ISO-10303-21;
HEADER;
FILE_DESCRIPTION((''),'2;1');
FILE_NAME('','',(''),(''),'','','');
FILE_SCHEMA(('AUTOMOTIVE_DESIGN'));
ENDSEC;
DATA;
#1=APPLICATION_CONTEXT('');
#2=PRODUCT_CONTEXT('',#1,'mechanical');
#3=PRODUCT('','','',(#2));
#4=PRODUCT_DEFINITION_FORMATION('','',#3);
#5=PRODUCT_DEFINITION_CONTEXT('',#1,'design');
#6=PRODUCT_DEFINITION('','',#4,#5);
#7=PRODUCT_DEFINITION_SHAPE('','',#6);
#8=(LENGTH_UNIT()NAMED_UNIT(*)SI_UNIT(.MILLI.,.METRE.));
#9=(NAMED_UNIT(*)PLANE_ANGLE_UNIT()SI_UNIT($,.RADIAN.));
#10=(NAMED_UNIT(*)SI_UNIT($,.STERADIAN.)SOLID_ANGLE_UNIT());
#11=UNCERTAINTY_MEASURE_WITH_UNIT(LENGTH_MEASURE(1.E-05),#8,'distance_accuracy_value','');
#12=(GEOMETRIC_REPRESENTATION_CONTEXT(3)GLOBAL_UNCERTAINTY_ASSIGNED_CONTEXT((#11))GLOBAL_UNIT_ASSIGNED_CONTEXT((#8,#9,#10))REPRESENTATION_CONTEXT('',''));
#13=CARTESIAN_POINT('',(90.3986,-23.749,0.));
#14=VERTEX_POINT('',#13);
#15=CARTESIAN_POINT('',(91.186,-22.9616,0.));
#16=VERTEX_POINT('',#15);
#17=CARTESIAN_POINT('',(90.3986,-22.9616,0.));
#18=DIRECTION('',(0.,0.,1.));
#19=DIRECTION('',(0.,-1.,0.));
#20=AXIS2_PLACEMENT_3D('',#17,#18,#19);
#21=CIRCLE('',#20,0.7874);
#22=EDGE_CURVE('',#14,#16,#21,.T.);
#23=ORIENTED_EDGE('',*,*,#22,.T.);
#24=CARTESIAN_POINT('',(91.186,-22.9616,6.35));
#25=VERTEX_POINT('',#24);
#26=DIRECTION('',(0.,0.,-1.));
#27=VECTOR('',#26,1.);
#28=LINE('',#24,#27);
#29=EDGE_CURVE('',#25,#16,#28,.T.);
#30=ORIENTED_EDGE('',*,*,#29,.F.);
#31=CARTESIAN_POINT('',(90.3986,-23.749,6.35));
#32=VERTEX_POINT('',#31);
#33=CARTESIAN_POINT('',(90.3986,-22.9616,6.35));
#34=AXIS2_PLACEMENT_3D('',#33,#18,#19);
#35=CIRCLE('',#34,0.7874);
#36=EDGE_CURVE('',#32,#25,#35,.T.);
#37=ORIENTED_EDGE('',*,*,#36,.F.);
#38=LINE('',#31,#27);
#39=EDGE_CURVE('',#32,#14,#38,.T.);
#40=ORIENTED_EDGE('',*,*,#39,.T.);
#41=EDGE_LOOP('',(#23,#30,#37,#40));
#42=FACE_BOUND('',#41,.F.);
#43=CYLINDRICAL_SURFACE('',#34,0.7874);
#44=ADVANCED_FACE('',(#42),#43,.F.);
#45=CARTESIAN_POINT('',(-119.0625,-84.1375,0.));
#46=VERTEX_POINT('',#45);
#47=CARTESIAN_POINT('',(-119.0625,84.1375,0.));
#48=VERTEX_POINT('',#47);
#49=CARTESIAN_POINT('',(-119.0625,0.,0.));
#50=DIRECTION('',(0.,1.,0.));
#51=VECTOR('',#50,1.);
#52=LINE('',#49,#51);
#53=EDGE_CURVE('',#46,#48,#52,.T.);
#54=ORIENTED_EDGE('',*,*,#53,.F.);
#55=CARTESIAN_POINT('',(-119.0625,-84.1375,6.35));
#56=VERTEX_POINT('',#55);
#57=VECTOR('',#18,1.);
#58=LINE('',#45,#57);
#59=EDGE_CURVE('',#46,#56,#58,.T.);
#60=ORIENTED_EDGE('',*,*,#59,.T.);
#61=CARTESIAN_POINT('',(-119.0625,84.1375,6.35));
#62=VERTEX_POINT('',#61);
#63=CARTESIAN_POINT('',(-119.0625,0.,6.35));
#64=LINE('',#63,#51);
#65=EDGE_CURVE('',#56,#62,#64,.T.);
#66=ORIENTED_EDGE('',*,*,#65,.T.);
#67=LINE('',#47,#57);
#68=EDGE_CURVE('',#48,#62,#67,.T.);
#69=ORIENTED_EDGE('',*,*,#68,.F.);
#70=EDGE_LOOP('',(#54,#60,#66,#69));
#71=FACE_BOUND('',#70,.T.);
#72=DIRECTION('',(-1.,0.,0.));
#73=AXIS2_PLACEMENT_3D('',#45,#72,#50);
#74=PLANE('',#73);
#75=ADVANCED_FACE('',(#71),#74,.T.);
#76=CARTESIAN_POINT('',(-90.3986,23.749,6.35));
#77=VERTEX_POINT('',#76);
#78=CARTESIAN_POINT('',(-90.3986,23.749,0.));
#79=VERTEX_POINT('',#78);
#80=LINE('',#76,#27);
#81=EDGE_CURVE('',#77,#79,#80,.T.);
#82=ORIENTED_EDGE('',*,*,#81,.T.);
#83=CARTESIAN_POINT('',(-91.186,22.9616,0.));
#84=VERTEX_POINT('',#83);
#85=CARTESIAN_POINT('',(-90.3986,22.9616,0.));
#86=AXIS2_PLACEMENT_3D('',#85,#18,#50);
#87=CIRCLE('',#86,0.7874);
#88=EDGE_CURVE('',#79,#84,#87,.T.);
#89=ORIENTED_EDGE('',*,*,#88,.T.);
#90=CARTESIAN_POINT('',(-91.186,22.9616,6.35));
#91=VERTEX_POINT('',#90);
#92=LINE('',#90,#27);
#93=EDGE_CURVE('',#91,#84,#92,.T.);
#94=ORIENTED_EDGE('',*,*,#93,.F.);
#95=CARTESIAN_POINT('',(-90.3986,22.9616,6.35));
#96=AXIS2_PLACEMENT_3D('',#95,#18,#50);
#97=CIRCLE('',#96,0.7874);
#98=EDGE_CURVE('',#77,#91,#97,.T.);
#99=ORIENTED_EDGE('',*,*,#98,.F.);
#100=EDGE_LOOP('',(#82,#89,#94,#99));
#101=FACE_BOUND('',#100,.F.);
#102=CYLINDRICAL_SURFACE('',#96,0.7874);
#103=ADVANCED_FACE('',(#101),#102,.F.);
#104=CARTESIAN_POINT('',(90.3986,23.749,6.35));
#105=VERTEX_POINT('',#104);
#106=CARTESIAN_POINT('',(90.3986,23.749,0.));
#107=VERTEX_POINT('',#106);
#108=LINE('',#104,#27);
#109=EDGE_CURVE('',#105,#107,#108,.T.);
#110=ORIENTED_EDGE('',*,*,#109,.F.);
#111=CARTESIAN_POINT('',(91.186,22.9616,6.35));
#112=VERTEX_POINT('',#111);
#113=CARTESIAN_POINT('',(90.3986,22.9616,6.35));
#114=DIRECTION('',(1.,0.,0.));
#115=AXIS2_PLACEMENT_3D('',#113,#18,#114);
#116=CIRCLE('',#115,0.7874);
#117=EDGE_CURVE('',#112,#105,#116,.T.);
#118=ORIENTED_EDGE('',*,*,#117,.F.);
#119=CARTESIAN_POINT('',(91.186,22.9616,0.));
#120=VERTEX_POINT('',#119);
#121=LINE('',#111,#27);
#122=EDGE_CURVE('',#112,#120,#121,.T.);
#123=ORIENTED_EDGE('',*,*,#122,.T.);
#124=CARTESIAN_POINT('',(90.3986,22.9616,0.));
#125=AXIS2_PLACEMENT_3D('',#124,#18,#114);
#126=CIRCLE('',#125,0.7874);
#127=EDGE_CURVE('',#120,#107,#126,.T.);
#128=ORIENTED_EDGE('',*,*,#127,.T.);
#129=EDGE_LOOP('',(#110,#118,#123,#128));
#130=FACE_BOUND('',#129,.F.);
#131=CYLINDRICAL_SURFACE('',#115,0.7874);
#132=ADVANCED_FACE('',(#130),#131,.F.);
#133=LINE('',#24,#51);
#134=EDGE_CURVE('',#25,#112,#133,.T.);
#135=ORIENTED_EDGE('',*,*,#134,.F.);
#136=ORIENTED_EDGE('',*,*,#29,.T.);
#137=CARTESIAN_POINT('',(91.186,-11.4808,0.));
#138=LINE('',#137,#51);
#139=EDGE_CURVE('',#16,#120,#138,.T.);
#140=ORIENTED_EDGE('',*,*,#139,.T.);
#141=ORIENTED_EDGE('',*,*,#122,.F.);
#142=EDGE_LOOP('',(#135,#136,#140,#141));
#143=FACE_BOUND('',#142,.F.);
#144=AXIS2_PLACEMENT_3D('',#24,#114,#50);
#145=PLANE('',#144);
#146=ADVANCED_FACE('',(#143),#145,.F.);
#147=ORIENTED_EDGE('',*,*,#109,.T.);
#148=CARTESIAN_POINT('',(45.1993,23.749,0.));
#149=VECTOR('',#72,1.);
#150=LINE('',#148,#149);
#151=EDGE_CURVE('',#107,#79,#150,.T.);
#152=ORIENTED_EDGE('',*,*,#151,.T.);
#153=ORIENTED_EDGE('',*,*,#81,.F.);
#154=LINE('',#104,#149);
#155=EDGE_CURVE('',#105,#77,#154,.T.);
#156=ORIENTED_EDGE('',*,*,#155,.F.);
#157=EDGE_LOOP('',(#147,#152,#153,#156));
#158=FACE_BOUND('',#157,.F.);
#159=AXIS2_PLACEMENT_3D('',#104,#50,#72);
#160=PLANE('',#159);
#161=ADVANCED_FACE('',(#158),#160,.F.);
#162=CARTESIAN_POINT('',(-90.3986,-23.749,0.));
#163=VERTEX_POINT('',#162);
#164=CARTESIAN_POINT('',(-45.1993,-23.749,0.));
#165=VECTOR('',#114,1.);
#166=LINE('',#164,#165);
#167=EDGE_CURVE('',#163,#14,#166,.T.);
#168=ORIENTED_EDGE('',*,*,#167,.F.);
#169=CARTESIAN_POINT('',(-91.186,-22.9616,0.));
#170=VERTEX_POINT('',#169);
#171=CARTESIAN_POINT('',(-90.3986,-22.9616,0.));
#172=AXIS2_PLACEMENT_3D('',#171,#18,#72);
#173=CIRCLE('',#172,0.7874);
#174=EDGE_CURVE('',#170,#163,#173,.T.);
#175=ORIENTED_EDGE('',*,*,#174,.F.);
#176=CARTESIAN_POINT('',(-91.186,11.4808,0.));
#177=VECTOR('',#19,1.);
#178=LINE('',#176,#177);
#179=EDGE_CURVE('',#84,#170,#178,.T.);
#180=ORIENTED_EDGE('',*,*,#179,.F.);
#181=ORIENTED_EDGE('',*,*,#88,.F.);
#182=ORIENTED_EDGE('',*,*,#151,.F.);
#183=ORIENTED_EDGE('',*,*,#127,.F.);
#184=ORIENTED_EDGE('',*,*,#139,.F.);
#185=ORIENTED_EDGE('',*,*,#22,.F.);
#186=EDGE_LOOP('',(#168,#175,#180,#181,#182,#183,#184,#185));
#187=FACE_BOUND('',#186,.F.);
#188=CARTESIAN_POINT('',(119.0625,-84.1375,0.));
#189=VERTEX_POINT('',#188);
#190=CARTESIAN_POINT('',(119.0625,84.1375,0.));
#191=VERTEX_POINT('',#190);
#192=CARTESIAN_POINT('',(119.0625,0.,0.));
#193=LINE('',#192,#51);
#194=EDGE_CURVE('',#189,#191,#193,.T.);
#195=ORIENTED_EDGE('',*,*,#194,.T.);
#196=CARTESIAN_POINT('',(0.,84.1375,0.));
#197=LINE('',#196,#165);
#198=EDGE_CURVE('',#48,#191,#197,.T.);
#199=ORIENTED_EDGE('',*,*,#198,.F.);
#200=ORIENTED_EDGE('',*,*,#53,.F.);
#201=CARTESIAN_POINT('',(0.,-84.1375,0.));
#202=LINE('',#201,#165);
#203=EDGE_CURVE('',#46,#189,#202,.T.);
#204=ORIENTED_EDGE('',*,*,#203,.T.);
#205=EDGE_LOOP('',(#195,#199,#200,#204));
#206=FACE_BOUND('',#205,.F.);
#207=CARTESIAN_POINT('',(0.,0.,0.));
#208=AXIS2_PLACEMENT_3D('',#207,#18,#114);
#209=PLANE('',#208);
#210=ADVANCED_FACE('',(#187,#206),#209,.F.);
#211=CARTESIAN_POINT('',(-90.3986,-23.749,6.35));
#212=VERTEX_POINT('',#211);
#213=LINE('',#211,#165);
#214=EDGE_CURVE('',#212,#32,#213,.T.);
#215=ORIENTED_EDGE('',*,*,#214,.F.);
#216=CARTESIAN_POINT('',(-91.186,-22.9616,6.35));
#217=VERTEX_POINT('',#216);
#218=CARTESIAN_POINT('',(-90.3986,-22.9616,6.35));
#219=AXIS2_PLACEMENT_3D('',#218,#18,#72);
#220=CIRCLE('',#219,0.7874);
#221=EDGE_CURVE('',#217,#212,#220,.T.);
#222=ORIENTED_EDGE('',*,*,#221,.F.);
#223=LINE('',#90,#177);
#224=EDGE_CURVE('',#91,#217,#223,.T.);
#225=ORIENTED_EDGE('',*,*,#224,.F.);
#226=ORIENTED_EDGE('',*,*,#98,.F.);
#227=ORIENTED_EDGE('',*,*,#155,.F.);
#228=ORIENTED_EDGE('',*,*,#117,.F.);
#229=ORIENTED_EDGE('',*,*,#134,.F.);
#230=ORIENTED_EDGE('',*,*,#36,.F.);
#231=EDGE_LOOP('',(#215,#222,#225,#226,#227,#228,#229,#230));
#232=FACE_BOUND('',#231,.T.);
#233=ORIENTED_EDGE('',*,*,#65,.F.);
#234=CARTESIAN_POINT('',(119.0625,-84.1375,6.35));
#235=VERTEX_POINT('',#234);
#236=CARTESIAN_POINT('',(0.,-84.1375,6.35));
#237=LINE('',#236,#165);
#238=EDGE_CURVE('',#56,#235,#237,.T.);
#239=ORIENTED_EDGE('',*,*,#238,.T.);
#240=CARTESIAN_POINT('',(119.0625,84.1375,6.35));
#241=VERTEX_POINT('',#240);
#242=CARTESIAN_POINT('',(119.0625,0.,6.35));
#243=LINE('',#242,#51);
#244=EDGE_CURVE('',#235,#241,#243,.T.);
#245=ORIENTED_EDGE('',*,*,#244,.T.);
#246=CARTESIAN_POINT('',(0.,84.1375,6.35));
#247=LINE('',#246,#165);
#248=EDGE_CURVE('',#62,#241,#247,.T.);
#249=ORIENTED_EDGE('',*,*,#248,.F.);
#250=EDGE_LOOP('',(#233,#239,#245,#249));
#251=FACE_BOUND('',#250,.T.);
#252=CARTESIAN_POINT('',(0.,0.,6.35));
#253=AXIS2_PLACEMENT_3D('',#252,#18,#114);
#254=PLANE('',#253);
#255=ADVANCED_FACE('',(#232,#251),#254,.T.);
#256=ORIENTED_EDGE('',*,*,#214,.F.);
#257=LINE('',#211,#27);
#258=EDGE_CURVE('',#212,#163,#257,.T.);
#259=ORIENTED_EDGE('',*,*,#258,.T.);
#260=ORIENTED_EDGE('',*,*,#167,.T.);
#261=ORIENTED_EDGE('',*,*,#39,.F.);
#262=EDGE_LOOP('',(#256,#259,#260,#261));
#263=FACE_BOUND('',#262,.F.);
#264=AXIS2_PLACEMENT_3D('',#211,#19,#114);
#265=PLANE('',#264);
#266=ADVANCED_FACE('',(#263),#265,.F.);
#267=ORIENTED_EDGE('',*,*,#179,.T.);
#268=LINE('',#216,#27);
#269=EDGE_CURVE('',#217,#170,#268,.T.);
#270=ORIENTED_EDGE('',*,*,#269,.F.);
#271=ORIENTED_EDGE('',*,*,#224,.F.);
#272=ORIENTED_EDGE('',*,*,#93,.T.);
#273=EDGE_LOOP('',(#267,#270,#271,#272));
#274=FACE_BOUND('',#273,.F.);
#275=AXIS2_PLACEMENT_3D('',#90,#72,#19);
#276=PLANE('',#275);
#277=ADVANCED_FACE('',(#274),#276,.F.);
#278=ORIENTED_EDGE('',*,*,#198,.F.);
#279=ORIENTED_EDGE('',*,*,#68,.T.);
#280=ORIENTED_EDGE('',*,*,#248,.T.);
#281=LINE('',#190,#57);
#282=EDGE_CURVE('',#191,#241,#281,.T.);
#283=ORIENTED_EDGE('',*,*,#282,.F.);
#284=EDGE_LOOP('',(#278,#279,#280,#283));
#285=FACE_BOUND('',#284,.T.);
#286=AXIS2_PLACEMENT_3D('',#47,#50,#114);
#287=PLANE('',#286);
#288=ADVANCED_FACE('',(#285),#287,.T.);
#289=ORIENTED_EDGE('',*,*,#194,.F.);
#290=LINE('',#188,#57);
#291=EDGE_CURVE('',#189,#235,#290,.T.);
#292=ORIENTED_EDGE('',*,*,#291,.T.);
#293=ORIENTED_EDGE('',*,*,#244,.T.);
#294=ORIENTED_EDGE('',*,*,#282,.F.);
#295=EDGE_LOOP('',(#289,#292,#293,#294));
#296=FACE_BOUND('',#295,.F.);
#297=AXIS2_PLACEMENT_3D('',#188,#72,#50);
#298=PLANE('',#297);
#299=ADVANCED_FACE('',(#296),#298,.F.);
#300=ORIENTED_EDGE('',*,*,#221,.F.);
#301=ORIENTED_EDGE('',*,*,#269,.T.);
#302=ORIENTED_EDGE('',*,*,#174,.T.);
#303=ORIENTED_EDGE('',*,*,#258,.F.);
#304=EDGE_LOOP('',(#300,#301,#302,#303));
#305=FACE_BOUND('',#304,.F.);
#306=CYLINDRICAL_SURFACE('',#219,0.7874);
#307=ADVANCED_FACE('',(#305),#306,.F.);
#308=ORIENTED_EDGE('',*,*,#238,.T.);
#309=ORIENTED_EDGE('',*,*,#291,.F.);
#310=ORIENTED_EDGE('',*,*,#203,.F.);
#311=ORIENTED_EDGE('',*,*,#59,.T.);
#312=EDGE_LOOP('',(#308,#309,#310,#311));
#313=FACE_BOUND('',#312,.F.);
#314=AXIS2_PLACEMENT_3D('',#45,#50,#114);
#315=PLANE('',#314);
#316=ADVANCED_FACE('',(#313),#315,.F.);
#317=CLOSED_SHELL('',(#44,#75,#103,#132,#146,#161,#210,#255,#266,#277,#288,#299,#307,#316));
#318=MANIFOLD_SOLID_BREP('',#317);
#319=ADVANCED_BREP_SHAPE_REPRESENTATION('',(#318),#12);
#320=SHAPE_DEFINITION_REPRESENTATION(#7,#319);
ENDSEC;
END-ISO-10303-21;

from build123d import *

# Parameters (mm, degrees)
F0_W     = 238.125
F0_H     = 168.275
F1_DEPTH = 6.35
F2_W     = 179.832
F2_H     = 44.958
F3_DEPTH = 25.4
F5_DEPTH = 6.351


# Not quite as in the source:
# - a feature of the source that left no trace in its solid (it failed there, or was rolled back) is left out


with BuildPart() as f1:
    # F0 (on Top) → F1 (new body)
    with BuildSketch(Plane.XY):
        Rectangle(F0_W, F0_H)
    extrude(amount=F1_DEPTH)

    # F2 (on face) → F3 (cut)
    with BuildSketch(Plane.XY.offset(6.35)):
        Rectangle(F2_W, F2_H)
    extrude(amount=-F3_DEPTH, mode=Mode.SUBTRACT)

    # F4 (on face) → F5 (cut, through all)
    with BuildSketch(Plane.XY.offset(6.35)):
        with BuildLine():
            Line((90.3986, 23.749), (-90.3986, 23.749))
            ThreePointArc((-90.3986, 23.749), (-90.9553758795, 23.5183758795), (-91.186, 22.9616))
            Line((-91.186, 22.9616), (-91.186, -22.9616))
            ThreePointArc((-91.186, -22.9616), (-90.9553758795, -23.5183758795), (-90.3986, -23.749))
            Line((-90.3986, -23.749), (90.3986, -23.749))
            ThreePointArc((90.3986, -23.749), (90.9553758795, -23.5183758795), (91.186, -22.9616))
            Line((91.186, -22.9616), (91.186, 22.9616))
            ThreePointArc((91.186, 22.9616), (90.9553758795, 23.5183758795), (90.3986, 23.749))
        make_face()
    extrude(amount=-F5_DEPTH, mode=Mode.SUBTRACT)


solid = f1.part
